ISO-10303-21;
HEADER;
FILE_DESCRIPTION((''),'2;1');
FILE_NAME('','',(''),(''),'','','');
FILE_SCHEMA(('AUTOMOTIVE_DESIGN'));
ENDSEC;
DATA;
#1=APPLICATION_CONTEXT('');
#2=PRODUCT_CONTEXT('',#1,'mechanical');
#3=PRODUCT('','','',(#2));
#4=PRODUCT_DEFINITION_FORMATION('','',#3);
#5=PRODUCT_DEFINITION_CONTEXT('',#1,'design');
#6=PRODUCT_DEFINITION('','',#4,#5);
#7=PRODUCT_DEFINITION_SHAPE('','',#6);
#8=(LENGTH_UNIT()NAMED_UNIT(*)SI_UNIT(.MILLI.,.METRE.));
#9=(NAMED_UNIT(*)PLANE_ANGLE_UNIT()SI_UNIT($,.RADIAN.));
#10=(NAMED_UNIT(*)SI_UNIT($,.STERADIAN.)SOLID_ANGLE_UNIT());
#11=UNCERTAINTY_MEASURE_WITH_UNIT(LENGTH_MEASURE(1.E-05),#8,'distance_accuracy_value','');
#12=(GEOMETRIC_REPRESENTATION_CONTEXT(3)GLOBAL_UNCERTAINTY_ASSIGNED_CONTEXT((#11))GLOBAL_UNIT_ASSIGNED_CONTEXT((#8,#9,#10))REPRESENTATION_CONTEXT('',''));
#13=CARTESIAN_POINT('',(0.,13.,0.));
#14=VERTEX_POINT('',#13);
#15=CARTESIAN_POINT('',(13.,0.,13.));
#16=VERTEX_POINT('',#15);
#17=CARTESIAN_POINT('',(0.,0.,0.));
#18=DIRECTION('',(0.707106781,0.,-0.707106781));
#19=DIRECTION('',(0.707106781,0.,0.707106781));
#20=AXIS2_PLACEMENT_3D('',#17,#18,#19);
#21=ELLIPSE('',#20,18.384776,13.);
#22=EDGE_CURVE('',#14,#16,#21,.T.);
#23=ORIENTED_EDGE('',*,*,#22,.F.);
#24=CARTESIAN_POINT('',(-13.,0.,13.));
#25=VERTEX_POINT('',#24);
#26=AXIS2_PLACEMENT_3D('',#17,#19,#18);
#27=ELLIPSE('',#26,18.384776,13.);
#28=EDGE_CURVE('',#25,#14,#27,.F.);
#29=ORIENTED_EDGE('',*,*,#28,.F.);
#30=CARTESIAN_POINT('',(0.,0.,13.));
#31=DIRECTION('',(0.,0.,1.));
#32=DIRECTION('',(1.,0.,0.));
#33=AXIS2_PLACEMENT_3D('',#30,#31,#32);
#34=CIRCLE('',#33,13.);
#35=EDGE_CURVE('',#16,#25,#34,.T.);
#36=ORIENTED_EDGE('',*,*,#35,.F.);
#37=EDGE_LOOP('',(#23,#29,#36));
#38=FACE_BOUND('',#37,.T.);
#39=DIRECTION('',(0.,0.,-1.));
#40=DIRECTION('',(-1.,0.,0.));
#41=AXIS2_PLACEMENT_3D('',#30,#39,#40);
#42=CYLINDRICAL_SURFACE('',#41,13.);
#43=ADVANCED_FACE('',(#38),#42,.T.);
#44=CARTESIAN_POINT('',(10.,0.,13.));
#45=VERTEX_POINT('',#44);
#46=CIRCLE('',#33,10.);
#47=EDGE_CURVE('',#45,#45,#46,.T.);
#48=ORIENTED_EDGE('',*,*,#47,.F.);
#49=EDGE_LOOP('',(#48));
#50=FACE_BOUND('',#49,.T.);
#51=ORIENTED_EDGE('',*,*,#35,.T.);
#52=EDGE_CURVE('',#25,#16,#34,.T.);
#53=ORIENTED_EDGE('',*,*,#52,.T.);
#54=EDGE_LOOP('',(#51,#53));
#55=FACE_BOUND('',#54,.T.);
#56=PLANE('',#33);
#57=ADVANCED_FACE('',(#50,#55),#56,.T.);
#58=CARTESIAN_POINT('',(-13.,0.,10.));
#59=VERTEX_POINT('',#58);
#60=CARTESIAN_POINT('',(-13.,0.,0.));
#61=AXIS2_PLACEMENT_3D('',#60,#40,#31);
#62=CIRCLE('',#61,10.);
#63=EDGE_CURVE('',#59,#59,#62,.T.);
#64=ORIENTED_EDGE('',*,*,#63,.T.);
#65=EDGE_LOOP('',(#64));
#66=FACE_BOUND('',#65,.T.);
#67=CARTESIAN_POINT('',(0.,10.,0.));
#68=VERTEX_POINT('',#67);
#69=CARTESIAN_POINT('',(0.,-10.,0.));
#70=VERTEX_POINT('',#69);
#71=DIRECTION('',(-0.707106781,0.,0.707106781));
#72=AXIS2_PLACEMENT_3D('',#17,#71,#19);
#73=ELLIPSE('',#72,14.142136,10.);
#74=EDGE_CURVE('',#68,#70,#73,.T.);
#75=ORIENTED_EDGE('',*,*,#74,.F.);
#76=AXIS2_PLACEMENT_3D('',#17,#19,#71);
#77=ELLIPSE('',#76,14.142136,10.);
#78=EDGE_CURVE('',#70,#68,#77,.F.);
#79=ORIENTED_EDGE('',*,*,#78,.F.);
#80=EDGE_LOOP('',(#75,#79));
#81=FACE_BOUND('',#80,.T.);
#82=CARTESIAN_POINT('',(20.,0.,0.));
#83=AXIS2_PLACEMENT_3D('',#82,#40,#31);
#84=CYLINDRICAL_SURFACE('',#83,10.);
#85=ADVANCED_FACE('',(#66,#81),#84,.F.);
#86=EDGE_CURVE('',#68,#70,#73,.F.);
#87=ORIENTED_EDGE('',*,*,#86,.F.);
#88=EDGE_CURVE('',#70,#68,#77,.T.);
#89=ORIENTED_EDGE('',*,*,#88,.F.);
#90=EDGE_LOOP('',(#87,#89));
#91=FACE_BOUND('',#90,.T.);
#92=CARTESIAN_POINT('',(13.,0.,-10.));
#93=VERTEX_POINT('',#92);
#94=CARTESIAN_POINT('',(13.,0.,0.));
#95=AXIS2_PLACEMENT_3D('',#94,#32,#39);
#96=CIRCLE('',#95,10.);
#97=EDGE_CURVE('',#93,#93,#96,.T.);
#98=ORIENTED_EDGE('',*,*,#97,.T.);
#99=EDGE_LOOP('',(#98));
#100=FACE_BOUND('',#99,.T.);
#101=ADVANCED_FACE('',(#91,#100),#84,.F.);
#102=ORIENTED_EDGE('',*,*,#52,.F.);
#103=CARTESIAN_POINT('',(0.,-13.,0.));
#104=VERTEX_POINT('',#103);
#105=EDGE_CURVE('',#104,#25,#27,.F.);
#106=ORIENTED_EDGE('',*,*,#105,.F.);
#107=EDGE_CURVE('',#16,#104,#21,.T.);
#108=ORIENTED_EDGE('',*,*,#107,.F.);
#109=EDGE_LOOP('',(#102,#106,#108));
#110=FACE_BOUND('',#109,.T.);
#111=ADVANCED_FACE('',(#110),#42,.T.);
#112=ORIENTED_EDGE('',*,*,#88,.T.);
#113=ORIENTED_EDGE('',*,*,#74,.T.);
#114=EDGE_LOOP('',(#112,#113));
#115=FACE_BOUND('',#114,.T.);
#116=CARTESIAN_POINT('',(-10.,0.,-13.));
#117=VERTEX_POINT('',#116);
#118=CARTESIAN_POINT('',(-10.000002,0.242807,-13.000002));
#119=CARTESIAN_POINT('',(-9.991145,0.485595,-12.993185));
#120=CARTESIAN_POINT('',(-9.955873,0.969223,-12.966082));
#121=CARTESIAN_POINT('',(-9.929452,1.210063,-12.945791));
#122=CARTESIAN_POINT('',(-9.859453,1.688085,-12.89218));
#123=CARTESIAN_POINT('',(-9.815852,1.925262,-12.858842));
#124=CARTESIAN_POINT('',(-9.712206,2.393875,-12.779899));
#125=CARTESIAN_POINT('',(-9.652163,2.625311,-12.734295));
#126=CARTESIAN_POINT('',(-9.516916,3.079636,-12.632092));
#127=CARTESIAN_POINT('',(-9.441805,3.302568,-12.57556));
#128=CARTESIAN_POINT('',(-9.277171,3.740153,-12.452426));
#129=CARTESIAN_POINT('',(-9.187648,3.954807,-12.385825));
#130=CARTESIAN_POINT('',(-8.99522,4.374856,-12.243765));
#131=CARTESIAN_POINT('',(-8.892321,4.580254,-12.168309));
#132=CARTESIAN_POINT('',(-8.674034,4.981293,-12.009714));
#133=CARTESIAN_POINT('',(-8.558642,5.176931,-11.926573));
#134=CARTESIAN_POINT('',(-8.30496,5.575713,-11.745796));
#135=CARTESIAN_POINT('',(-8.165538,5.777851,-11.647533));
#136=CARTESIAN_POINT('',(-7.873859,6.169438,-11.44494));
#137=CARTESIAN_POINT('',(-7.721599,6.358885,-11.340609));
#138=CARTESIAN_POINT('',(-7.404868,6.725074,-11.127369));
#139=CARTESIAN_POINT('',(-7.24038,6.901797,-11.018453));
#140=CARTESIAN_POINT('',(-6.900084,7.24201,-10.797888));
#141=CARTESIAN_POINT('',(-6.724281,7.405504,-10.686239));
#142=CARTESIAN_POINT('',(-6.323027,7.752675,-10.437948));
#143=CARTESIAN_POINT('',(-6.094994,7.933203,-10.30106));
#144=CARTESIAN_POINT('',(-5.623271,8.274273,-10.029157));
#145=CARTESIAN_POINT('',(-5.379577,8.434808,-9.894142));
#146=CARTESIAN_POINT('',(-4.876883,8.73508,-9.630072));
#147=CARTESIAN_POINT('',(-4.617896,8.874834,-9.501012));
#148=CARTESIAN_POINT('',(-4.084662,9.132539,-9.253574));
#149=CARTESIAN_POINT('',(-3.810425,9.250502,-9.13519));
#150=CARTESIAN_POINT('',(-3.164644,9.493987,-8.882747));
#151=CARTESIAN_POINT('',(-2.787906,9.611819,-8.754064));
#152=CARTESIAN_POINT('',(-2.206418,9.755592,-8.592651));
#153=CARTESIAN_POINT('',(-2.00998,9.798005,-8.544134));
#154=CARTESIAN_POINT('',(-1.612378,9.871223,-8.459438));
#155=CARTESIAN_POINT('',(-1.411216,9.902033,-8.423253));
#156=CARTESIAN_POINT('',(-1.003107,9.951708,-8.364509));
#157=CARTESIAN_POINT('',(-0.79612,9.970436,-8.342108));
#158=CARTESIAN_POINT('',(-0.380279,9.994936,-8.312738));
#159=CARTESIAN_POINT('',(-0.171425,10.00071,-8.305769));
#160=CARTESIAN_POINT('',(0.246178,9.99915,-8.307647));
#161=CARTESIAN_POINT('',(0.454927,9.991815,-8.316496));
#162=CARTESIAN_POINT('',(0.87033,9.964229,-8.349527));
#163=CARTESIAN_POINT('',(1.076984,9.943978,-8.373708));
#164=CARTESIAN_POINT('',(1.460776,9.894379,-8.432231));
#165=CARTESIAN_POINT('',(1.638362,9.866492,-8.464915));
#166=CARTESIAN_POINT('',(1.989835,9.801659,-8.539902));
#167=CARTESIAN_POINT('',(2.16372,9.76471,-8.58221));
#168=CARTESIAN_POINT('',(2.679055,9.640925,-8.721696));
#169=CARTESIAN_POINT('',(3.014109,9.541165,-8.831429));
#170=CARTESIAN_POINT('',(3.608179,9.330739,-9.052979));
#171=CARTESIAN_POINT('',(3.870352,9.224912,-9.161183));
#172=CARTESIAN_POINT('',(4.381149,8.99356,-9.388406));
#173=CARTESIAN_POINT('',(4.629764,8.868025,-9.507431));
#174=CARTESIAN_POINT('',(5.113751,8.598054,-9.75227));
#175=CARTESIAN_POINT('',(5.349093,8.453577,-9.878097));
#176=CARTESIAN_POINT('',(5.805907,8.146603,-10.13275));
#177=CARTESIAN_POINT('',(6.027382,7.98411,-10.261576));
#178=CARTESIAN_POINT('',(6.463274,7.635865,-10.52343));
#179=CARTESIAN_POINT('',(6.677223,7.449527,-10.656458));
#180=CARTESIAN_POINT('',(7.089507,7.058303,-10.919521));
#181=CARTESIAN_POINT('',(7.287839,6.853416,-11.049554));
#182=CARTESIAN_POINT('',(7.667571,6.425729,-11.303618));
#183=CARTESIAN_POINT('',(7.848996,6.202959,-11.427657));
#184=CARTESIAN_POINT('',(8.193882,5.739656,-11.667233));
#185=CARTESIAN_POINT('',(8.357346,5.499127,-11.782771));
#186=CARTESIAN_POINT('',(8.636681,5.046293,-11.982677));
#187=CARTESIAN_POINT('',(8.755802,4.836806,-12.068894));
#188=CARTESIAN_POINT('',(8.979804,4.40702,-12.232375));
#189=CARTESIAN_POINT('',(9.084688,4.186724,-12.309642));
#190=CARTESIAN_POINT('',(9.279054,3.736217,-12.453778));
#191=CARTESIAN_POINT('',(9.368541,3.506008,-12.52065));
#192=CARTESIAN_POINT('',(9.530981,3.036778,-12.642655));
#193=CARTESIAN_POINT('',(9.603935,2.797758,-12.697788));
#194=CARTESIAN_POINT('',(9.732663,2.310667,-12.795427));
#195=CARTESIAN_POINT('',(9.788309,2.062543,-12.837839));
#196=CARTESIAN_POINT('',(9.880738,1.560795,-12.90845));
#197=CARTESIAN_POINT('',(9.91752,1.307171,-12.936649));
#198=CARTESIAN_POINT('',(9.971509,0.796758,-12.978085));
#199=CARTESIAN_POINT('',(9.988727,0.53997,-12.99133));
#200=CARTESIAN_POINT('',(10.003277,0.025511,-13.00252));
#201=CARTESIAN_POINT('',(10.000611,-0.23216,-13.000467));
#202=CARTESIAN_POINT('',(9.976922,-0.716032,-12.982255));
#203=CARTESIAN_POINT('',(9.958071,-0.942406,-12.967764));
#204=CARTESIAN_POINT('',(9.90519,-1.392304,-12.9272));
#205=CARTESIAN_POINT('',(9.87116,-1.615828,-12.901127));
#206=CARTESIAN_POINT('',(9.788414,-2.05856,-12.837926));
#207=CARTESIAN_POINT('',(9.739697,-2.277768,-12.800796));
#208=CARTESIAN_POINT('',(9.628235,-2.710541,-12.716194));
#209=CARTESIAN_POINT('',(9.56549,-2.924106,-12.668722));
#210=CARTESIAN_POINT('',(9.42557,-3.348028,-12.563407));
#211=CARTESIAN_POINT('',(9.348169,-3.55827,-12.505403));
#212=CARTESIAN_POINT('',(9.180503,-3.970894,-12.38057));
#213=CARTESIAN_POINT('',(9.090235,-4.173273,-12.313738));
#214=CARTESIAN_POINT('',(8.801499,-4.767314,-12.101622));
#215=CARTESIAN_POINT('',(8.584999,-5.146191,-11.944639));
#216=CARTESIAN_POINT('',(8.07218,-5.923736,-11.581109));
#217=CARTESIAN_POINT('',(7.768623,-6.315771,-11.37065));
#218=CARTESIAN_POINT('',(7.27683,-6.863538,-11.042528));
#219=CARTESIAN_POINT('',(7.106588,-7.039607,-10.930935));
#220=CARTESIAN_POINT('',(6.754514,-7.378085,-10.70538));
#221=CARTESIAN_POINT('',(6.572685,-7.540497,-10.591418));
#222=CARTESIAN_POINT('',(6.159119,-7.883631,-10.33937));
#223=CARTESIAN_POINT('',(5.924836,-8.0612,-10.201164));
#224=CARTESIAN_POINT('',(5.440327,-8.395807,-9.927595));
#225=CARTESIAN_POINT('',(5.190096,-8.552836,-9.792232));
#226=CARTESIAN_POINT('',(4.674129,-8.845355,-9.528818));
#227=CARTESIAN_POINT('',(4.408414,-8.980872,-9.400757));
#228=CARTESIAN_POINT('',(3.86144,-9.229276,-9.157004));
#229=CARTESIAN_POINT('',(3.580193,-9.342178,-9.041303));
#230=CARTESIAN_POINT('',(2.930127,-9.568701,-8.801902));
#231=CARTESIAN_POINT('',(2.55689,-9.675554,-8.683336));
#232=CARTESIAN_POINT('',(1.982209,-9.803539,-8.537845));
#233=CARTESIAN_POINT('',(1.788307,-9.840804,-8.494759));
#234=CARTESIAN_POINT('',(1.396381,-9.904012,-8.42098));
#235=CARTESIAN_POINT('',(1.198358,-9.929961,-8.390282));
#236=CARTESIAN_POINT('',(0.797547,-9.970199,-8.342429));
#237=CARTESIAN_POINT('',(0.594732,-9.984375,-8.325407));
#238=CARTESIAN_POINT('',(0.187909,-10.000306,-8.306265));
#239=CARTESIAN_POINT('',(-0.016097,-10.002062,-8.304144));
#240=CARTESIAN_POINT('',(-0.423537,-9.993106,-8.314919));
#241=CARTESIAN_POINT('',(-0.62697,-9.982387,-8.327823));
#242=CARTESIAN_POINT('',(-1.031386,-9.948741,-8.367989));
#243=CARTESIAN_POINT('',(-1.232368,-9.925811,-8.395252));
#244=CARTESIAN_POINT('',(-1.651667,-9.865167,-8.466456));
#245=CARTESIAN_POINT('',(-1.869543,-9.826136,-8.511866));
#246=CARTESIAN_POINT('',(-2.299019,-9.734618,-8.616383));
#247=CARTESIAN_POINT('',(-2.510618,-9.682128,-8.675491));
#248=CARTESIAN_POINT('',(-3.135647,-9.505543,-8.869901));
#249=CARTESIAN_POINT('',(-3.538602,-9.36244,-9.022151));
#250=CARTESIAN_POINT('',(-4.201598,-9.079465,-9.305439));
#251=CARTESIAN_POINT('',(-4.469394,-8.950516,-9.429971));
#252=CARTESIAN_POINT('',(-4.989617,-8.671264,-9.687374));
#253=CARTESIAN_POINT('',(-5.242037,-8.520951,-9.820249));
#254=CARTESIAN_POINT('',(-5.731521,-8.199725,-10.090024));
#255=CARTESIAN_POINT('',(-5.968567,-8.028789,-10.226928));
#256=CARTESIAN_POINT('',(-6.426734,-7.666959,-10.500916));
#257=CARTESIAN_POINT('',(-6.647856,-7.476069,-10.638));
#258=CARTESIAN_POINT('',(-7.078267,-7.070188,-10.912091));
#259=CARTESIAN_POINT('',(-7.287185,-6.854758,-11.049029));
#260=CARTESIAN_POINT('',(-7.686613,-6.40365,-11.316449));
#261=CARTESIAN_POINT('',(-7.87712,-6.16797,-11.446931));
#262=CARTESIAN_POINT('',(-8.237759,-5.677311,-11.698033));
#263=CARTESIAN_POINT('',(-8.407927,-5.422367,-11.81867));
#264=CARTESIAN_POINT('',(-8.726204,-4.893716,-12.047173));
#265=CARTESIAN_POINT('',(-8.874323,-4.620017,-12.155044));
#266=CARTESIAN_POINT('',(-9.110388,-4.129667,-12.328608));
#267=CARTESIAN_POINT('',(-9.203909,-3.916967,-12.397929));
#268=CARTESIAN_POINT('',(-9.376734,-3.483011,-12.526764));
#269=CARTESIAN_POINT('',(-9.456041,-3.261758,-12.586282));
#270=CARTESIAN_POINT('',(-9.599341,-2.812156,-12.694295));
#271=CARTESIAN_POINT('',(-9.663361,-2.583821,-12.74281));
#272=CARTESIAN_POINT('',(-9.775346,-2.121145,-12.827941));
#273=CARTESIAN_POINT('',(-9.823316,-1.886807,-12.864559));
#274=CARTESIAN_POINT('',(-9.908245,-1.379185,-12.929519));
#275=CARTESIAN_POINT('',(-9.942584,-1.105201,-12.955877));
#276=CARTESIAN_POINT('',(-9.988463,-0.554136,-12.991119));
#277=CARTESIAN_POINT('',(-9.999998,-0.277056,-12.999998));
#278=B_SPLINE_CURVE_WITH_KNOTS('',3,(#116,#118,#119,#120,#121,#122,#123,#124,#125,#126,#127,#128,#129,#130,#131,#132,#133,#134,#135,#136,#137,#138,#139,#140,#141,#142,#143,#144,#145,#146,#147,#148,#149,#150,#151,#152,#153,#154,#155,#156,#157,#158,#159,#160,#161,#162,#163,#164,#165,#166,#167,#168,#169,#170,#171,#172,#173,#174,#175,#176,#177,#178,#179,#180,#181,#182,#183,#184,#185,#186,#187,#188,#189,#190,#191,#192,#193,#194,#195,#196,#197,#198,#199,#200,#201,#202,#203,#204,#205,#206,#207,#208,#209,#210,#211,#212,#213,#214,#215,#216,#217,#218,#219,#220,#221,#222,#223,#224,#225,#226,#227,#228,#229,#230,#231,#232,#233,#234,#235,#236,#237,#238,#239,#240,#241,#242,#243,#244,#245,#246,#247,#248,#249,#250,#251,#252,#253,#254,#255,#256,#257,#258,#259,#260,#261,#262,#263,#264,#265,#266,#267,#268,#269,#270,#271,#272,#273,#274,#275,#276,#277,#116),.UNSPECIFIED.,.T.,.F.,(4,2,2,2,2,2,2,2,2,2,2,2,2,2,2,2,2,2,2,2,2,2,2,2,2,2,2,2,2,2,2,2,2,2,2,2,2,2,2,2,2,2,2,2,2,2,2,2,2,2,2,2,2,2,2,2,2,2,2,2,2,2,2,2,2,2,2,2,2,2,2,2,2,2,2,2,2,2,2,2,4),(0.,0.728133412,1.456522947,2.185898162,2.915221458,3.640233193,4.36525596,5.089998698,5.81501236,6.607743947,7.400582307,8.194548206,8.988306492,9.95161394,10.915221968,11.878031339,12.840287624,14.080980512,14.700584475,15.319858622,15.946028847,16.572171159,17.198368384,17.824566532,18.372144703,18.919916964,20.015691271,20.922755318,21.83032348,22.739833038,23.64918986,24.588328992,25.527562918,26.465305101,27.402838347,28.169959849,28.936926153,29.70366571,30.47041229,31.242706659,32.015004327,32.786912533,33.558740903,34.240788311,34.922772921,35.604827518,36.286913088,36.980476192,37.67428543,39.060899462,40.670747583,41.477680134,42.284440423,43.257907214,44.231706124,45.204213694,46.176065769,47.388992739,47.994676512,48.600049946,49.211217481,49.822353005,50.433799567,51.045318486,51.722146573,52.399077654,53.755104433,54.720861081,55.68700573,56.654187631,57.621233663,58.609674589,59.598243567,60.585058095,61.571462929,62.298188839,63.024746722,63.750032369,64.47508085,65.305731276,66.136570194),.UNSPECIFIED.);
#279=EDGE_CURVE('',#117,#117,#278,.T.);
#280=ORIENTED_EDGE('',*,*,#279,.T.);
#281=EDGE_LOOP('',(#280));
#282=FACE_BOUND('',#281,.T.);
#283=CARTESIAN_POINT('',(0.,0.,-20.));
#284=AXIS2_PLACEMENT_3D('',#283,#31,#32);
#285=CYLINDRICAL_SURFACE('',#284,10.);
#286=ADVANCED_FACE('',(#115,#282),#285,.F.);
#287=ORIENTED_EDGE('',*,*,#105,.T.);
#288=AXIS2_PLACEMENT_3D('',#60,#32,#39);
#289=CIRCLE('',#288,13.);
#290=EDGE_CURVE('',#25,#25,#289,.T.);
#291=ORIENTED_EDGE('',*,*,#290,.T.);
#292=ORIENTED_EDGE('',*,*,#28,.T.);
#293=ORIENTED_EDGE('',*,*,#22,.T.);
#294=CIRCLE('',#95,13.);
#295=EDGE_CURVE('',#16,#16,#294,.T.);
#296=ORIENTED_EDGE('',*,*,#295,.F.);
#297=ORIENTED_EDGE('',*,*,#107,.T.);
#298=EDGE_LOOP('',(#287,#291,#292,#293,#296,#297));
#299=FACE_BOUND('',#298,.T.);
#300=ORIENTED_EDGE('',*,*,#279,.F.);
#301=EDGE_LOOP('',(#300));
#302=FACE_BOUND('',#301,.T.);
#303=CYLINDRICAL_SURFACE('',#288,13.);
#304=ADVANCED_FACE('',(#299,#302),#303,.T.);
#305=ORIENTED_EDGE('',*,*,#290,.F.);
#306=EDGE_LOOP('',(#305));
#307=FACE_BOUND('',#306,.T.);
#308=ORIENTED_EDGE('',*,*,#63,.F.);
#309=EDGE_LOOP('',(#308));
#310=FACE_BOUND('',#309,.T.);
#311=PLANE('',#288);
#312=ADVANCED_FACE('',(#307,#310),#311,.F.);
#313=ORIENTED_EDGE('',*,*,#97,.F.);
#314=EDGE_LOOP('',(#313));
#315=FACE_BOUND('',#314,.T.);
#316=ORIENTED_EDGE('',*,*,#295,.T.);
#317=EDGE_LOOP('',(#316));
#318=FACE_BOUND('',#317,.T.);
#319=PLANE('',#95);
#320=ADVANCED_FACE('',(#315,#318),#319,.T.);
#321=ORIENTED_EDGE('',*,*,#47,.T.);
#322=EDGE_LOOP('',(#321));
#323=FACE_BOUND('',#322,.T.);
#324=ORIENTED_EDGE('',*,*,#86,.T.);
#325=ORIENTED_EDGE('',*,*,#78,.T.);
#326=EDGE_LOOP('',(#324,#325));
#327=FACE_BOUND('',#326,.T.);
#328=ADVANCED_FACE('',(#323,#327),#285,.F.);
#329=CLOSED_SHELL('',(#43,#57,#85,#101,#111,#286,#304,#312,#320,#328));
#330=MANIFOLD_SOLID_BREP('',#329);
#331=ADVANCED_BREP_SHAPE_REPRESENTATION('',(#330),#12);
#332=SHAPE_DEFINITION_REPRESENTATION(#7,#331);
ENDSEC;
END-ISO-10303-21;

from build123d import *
from build123d.topology import SkipClean

# Parameters (mm, degrees)
BOSS_EXTRUDE4_DEPTH      = 13
BOSS_EXTRUDE4_DEPTH_BACK = 13
SKETCH46_R               = 13
SKETCH47_R               = 13
BOSS_EXTRUDE5_DEPTH      = 13
SKETCH48_R               = 10
CUT_EXTRUDE1_DEPTH       = 33
SKETCH49_R               = 10
CUT_EXTRUDE2_DEPTH       = 33


with BuildPart() as part:
    # Sketch46 → Boss-Extrude4 (new, two sides: drawn at the far end of the back side and taken through both)
    with BuildSketch(Plane(origin=(0, 0, 0), x_dir=(0, 0, -1), z_dir=(1, 0, 0)).offset(-BOSS_EXTRUDE4_DEPTH_BACK)):
        Circle(SKETCH46_R)
    extrude(amount=BOSS_EXTRUDE4_DEPTH + BOSS_EXTRUDE4_DEPTH_BACK)

    # Sketch47 → Boss-Extrude5 (add)
    with SkipClean():  # the faces are left unmerged after this step: merging them gives an invalid solid
        with BuildSketch(Plane.XY):
            Circle(SKETCH47_R)
        extrude(amount=BOSS_EXTRUDE5_DEPTH)

    # Sketch48 → Cut-Extrude1 (cut)
    with SkipClean():  # the faces are left unmerged after this step: merging them gives an invalid solid
        with BuildSketch(Plane.XY.offset(13)):
            Circle(SKETCH48_R)
        extrude(amount=-CUT_EXTRUDE1_DEPTH, mode=Mode.SUBTRACT)

    # Sketch49 → Cut-Extrude2 (cut)
    with SkipClean():  # the faces are left unmerged after this step: merging them gives an invalid solid
        with BuildSketch(Plane.ZY.offset(13)):
            Circle(SKETCH49_R)
        extrude(amount=-CUT_EXTRUDE2_DEPTH, mode=Mode.SUBTRACT)


solid = part.part
